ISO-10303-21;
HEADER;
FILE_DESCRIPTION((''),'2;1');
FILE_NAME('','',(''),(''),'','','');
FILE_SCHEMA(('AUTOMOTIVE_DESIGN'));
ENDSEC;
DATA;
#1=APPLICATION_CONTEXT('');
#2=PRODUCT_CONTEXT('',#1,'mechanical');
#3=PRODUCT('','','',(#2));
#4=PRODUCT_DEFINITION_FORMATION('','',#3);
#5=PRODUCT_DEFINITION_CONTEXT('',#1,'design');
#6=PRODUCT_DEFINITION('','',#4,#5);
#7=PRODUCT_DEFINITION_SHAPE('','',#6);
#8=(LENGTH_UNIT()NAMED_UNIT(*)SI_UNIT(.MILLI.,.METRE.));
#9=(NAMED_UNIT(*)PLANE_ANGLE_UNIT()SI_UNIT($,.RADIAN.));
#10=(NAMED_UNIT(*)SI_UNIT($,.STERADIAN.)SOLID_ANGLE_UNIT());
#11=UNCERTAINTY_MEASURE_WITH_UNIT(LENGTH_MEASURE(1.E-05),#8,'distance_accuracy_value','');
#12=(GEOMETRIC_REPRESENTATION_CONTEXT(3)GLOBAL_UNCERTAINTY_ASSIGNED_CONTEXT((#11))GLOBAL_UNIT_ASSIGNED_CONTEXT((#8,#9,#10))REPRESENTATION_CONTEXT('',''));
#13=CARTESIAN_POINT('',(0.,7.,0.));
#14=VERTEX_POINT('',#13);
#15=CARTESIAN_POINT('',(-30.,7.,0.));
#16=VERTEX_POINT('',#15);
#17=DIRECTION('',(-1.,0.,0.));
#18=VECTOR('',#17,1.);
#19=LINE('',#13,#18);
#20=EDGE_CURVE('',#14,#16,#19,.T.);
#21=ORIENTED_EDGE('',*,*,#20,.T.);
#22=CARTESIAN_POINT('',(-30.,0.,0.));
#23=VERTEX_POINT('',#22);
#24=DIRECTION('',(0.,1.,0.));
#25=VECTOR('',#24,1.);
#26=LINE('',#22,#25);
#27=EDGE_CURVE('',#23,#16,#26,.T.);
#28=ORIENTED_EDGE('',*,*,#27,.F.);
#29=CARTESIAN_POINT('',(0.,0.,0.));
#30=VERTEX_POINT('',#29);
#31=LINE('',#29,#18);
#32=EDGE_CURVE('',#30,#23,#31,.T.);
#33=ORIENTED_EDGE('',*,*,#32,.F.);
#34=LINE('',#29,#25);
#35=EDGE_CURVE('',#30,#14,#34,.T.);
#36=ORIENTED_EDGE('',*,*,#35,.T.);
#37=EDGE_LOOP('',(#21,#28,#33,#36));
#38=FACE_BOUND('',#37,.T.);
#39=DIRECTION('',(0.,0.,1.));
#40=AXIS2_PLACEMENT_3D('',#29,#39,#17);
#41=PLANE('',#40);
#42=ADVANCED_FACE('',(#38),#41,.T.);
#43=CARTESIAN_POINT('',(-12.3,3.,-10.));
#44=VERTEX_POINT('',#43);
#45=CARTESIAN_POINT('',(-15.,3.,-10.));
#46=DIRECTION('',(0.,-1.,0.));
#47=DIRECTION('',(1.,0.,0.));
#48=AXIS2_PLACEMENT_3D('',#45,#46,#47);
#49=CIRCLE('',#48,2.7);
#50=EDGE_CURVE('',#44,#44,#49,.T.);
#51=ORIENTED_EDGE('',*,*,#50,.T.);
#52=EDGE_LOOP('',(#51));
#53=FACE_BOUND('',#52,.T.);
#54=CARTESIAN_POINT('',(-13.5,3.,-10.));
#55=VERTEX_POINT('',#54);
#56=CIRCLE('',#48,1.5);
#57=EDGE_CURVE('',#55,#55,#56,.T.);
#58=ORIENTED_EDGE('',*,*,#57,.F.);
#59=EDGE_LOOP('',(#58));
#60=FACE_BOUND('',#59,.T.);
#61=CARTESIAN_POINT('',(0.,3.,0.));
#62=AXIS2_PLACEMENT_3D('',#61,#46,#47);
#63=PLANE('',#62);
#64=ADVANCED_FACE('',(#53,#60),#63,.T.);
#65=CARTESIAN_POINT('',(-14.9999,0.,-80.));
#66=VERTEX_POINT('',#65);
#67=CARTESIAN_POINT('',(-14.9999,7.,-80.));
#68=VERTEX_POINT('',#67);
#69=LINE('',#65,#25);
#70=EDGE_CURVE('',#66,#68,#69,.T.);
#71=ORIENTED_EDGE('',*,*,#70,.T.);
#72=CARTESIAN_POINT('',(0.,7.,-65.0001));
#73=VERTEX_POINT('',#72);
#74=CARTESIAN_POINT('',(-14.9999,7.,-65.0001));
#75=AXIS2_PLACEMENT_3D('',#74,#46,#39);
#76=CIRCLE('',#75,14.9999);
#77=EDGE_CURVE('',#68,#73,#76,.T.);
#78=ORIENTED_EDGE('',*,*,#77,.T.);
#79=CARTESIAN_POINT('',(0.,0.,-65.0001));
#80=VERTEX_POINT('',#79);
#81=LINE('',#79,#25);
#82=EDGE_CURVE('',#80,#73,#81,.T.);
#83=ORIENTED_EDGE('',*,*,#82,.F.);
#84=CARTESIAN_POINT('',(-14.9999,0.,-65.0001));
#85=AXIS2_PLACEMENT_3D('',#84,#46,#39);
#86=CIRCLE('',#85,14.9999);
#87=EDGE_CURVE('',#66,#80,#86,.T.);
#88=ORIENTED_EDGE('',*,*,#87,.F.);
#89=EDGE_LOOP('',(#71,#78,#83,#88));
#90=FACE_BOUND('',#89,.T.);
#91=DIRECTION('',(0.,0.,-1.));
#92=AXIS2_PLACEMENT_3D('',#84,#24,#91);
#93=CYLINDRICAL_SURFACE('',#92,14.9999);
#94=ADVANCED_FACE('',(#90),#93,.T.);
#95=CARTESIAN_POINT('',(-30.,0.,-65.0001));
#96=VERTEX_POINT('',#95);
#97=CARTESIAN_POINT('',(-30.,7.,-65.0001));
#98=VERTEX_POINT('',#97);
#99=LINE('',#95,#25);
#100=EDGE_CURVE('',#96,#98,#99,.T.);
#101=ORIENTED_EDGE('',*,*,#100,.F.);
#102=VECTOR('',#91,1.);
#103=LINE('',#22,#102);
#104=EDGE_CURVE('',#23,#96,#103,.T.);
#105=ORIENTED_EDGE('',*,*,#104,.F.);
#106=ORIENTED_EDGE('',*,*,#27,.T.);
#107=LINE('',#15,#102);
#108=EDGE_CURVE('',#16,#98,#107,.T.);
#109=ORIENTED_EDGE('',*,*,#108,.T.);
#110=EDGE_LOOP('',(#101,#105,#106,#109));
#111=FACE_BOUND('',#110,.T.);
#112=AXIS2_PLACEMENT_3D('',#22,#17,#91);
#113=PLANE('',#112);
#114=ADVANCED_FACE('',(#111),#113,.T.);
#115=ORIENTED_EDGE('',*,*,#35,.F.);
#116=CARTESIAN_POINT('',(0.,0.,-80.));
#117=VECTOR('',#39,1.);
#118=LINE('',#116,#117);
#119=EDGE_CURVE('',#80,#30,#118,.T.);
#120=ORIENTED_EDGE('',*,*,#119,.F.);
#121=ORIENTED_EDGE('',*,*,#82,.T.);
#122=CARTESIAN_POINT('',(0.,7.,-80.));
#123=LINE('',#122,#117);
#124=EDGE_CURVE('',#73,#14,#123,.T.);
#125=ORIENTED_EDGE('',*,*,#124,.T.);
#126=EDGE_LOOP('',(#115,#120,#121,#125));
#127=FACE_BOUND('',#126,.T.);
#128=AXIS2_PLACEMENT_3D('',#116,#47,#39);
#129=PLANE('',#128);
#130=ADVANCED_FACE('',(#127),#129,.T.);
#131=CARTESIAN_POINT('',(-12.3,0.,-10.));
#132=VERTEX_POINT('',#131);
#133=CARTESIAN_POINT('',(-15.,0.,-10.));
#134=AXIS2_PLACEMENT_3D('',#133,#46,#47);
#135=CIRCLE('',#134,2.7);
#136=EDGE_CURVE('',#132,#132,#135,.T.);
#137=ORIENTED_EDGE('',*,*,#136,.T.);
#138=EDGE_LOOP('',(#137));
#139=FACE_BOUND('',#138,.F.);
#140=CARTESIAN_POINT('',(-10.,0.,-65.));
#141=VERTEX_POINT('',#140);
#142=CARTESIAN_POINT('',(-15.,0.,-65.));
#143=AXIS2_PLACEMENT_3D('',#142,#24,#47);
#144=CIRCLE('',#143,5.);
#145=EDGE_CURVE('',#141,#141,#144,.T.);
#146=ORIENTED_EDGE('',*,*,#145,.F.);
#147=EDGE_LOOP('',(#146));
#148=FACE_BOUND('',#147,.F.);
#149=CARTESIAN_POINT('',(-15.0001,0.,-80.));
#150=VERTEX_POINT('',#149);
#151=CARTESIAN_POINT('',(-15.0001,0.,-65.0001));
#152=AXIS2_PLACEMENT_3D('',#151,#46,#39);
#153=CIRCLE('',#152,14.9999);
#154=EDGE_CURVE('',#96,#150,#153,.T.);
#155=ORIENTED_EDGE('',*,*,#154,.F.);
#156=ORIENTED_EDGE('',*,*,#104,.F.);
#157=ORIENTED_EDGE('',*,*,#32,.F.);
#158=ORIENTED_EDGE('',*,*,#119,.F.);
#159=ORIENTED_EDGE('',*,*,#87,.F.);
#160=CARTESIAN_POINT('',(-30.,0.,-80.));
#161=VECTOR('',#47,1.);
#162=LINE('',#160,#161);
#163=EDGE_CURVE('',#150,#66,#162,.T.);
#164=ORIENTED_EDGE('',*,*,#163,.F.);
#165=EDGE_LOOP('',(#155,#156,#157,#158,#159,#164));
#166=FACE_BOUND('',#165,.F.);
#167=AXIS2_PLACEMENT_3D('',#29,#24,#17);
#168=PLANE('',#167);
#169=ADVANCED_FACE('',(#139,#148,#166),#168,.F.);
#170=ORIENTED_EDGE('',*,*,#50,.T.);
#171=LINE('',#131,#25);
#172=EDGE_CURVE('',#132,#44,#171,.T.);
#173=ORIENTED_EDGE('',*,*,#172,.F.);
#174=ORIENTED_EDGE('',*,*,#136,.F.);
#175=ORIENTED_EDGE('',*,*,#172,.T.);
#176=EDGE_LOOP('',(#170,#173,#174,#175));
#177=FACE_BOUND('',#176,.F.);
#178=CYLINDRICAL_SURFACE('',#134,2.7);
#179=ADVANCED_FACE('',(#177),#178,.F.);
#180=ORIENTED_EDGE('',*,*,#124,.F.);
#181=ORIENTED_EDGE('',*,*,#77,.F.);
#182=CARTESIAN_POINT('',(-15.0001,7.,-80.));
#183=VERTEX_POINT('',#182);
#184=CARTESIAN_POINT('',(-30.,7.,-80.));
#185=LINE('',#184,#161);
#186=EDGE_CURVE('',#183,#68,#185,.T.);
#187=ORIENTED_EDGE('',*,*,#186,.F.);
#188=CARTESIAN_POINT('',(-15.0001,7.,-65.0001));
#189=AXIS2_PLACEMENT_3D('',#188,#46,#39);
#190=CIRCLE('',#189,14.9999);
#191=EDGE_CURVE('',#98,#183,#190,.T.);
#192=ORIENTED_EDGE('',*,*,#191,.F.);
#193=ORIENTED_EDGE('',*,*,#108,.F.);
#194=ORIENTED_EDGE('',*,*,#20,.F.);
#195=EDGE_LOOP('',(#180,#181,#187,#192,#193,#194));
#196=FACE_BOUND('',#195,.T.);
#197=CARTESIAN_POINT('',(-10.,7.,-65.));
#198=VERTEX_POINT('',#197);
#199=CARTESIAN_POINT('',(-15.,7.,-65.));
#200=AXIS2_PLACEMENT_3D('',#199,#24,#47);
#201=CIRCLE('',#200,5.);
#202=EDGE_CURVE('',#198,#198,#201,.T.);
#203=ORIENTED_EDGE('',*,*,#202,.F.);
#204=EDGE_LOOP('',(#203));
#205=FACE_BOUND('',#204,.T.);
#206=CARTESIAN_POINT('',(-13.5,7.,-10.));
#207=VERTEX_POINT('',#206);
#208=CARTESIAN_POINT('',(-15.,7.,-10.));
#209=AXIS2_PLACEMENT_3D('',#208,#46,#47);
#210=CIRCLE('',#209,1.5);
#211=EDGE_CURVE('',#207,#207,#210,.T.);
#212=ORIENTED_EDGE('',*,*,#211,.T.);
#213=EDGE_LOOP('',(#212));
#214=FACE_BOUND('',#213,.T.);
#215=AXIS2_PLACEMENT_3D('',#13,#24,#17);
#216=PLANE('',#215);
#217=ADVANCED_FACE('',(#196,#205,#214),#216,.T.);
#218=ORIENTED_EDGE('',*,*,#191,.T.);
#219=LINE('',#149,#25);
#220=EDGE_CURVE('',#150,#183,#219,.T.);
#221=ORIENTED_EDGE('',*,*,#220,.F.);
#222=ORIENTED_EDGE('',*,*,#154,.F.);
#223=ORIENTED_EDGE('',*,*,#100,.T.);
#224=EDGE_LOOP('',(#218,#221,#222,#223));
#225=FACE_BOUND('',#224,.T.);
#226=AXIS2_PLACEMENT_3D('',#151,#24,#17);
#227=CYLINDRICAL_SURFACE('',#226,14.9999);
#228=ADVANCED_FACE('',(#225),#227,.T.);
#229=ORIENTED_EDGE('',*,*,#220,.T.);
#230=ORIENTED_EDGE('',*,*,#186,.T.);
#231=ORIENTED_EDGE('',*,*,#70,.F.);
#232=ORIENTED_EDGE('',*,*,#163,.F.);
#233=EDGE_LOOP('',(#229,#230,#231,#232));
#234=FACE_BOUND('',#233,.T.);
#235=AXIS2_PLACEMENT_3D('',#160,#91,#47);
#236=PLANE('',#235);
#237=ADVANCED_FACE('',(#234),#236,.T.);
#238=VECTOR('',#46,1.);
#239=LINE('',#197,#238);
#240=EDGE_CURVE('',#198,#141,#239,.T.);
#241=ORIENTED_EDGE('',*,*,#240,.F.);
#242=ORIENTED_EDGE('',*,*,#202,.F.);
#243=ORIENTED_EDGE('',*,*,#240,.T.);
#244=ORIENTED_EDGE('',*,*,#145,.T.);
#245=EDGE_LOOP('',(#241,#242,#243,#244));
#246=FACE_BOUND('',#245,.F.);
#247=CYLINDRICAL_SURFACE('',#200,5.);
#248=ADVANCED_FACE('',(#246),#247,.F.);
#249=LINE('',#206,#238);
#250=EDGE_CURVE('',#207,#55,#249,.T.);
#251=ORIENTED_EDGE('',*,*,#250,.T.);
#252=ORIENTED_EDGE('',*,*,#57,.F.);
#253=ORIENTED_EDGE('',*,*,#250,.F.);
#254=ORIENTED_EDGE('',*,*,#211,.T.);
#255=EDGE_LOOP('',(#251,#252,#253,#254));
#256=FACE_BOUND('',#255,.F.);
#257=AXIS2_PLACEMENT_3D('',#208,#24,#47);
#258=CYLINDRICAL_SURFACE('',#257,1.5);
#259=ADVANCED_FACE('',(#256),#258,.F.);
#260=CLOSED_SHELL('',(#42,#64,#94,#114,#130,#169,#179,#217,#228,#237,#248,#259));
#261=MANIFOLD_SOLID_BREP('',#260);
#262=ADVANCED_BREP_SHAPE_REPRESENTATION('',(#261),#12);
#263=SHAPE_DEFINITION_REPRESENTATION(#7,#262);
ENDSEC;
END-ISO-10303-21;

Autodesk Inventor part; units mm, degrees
ref_plane "YZ Plane" through (0, 0, 0) normal (1, 0, 0) x (0, 1, 0)
ref_plane "XZ Plane" through (0, 0, 0) normal (0, 1, 0) x (-1, 0, 0)
ref_plane "XY Plane" through (0, 0, 0) normal (0, 0, 1) x (1, 0, 0)
sketch "Sketch1" plane through (0, 0, 0) normal (0, 1, 0) x (-1, 0, 0)
  line L0 (0, 0) -> (30, 0)
  line L1 (30, 0) -> (30, -80)
  line L2 (30, -80) -> (0, -80)
  line L3 (0, -80) -> (0, 0)
  dimension "d0" = 30
  dimension "d1" = 80
extrude "Extrusion1" add sketch "Sketch1" along normal blind 7
fillet "Fillet1" radius 15 2 edges at (0, 3.5, -80) (-30, 3.5, -80)
sketch "Sketch2" plane through (0, 7, 0) normal (0, 1, 0) x (1, 0, 0)
  arc A0 (0, 65) -> (-30, 65) centre (-15, 65) ccw projected
  circle A1 centre (-15, 65) radius 5
  point P0 (0, 0)
  dimension "d5" = 10
extrude "Extrusion2" cut sketch "Sketch2" against normal blind 7
sketch "Sketch3" plane through (0, 0, 0) normal (0, -1, 0) x (1, 0, 0)
  line L0 (-30, 0) -> (0, 0) projected
  circle A0 centre (-15, -10) radius 2.7
  dimension "d9" = 5.4
extrude "Extrusion3" cut sketch "Sketch3" against normal blind 3
sketch "Sketch4" plane through (0, 7, 0) normal (0, 1, 0) x (1, 0, 0)
  line L0 (-30, 0) -> (0, 0) projected
  line L1 (-15, 0) -> (-15, 10)
  circle A0 centre (-15, 10) radius 1.5
  dimension "d12" = 10
  dimension "d13" = 3
extrude "Extrusion4" cut sketch "Sketch4" against normal blind 7
properties part number "Crank"
